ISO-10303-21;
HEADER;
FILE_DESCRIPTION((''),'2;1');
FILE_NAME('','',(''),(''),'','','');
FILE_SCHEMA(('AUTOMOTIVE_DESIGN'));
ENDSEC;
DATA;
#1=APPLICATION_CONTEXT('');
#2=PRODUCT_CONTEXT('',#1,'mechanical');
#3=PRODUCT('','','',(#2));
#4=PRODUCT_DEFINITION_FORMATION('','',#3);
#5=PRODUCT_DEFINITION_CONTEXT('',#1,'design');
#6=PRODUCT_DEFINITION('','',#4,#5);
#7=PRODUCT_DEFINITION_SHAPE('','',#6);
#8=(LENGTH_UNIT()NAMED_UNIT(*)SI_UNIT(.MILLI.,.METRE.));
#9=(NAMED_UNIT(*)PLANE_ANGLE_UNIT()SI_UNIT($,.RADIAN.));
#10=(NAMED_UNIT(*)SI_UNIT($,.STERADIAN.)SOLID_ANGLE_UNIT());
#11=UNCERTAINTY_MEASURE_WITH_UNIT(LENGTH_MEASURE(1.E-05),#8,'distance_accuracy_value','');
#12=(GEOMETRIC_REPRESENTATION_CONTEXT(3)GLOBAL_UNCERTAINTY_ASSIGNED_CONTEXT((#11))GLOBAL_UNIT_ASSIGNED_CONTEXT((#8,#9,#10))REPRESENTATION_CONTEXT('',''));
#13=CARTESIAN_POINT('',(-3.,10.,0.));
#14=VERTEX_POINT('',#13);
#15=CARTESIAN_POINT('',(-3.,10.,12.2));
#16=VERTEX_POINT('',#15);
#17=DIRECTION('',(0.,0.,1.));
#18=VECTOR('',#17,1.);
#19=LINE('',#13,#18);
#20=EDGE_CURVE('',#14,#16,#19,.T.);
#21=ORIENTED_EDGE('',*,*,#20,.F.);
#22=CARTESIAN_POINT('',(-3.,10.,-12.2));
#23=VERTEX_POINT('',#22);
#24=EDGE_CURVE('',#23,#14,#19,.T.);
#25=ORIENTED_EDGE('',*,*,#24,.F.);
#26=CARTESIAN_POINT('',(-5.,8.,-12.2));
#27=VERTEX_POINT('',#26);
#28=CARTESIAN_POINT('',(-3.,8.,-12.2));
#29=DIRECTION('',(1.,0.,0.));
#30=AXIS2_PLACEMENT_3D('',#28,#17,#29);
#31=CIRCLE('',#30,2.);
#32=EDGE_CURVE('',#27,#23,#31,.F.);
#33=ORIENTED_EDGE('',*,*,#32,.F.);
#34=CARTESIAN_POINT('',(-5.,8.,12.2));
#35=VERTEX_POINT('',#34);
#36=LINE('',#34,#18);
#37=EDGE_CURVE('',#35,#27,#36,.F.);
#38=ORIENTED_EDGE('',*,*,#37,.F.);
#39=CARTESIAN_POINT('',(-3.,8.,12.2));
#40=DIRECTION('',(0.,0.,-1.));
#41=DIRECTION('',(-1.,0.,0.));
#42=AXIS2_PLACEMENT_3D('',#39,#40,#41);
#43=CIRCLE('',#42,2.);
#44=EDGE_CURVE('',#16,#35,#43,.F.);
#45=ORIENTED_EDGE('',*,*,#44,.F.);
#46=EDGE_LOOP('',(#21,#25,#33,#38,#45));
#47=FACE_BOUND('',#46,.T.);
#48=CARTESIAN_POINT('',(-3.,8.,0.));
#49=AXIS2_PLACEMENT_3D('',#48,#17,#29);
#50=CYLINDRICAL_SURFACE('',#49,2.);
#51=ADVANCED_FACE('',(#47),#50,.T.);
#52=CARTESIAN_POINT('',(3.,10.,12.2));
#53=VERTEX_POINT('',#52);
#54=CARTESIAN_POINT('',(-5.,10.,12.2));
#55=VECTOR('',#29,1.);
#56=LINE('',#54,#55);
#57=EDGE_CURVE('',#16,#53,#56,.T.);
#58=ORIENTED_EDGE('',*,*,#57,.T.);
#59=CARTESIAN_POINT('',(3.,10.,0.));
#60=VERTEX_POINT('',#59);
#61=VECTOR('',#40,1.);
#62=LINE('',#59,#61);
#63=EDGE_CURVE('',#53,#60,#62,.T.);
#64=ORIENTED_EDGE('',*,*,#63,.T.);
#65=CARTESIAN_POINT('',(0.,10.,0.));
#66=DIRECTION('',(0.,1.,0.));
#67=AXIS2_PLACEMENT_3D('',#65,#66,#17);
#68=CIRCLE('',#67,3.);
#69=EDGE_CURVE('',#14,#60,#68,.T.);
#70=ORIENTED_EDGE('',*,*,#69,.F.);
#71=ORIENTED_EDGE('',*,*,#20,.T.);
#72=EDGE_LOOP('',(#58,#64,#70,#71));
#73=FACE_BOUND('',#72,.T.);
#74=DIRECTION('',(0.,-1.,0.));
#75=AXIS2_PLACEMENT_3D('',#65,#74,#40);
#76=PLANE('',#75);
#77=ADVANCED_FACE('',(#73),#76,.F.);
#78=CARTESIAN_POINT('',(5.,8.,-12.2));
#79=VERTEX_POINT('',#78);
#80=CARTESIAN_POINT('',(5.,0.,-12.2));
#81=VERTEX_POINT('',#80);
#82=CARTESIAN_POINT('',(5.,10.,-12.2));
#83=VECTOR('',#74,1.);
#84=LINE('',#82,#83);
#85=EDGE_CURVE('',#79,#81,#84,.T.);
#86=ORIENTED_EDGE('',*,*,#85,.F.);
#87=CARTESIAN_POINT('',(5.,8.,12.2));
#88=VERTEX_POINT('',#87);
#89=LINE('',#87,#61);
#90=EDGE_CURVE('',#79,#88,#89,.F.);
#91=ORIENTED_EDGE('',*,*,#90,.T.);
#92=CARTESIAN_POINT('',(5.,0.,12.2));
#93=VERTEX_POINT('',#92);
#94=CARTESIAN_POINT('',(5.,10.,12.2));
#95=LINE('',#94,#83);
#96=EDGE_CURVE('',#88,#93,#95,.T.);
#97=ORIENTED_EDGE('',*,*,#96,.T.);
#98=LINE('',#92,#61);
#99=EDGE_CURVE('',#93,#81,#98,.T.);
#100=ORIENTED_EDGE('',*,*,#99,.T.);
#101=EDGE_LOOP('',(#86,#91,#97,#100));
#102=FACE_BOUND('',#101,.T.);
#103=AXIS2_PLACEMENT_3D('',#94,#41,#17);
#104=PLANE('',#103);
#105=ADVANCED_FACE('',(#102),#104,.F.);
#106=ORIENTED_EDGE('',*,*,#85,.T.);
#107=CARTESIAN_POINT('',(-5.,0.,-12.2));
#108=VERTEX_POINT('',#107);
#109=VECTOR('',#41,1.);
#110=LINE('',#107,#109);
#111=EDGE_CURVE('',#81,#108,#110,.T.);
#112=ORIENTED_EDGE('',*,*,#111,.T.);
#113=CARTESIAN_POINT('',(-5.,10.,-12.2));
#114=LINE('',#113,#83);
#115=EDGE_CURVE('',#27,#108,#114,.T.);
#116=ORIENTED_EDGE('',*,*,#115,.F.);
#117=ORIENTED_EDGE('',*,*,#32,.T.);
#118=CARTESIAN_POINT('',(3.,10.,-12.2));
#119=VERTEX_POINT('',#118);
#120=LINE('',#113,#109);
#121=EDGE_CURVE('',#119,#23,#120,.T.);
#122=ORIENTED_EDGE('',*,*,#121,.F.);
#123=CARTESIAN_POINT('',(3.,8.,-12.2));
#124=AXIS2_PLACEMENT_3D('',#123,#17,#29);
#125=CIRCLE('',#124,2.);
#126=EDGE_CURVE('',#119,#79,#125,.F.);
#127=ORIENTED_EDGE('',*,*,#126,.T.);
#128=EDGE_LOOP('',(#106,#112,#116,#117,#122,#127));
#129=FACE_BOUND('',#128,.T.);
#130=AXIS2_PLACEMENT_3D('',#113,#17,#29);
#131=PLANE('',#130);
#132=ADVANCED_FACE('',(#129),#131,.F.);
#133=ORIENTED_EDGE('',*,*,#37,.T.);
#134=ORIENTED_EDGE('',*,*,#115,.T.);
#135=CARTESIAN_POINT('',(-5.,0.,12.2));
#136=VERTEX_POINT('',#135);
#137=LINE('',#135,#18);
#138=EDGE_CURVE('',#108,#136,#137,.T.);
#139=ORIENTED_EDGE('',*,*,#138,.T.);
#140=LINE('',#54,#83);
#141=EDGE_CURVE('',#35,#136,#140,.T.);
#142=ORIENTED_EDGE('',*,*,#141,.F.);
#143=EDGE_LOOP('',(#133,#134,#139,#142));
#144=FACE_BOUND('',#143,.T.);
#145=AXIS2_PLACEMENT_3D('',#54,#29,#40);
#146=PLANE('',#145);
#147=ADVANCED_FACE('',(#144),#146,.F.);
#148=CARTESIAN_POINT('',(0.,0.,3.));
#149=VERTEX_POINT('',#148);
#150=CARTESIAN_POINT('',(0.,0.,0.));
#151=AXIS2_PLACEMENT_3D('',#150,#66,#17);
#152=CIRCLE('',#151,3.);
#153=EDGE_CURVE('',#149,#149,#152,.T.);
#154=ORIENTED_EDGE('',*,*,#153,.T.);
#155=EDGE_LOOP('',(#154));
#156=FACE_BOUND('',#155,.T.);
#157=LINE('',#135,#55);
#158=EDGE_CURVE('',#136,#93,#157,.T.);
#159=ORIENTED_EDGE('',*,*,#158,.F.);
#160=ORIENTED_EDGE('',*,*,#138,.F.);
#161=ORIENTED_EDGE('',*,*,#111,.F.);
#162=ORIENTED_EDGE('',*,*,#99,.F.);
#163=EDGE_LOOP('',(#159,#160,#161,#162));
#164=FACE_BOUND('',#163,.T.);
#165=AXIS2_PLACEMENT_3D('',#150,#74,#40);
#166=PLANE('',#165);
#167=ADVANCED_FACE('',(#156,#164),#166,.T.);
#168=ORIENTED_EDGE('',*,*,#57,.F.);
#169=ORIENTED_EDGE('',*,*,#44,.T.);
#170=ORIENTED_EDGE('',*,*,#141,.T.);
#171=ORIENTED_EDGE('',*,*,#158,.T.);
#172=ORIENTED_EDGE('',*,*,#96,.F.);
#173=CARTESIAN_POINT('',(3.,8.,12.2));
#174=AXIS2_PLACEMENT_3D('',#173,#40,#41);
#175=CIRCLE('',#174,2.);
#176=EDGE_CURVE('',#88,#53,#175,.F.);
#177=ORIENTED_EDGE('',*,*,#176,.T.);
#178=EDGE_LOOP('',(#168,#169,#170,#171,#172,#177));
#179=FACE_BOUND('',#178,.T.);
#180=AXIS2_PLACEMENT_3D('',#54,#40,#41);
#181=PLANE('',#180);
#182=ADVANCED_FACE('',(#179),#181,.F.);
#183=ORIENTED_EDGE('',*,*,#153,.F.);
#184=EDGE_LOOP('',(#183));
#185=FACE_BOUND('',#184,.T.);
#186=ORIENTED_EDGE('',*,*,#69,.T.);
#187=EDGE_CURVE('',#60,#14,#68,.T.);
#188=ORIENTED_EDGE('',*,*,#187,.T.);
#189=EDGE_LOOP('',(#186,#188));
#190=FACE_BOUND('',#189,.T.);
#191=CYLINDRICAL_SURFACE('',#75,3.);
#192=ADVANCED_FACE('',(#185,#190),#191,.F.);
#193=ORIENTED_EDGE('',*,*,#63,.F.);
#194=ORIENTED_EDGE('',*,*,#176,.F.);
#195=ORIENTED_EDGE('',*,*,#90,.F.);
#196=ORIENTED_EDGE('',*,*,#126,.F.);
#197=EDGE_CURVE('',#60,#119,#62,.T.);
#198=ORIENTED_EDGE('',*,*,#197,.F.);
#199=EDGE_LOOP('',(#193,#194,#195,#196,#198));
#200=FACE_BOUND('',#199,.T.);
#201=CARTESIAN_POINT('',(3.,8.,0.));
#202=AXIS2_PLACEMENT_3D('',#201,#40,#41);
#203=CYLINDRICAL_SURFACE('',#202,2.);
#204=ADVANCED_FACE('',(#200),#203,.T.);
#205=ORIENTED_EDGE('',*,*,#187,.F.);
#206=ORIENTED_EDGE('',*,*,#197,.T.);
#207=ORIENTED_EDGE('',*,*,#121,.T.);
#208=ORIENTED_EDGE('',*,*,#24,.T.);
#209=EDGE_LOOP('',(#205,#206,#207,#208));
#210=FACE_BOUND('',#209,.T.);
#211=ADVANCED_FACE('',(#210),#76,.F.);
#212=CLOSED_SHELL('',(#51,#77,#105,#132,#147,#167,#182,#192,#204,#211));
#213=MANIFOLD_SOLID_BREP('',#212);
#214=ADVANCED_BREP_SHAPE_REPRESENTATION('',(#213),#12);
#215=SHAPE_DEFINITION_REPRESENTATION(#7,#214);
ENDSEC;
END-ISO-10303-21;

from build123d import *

# Parameters (mm, degrees)
SKETCH1_W           = 10
SKETCH1_H           = 24.4
SKETCH1_R           = 3
BOSS_EXTRUDE1_DEPTH = 10
FILLET1_R           = 2


with BuildPart() as part:
    # Sketch1 → Boss-Extrude1 (new body)
    with BuildSketch(Plane(origin=(0, 0, 0), x_dir=(1, 0, 0), z_dir=(0, 1, 0))):
        Rectangle(SKETCH1_W, SKETCH1_H)
        with Locations(Location((0, 0, 0), (0, 0, 270))):
            Circle(SKETCH1_R, mode=Mode.SUBTRACT)
    extrude(amount=BOSS_EXTRUDE1_DEPTH)

    # Fillet1
    fillet1_edges = [part.edges().sort_by_distance(p)[0] for p in [
        (-5, 10, 0),
        (5, 10, 0),
    ]]
    fillet(fillet1_edges, radius=FILLET1_R - 0.0001)  # a hair under: the kernel refuses the full size


solid = part.part
